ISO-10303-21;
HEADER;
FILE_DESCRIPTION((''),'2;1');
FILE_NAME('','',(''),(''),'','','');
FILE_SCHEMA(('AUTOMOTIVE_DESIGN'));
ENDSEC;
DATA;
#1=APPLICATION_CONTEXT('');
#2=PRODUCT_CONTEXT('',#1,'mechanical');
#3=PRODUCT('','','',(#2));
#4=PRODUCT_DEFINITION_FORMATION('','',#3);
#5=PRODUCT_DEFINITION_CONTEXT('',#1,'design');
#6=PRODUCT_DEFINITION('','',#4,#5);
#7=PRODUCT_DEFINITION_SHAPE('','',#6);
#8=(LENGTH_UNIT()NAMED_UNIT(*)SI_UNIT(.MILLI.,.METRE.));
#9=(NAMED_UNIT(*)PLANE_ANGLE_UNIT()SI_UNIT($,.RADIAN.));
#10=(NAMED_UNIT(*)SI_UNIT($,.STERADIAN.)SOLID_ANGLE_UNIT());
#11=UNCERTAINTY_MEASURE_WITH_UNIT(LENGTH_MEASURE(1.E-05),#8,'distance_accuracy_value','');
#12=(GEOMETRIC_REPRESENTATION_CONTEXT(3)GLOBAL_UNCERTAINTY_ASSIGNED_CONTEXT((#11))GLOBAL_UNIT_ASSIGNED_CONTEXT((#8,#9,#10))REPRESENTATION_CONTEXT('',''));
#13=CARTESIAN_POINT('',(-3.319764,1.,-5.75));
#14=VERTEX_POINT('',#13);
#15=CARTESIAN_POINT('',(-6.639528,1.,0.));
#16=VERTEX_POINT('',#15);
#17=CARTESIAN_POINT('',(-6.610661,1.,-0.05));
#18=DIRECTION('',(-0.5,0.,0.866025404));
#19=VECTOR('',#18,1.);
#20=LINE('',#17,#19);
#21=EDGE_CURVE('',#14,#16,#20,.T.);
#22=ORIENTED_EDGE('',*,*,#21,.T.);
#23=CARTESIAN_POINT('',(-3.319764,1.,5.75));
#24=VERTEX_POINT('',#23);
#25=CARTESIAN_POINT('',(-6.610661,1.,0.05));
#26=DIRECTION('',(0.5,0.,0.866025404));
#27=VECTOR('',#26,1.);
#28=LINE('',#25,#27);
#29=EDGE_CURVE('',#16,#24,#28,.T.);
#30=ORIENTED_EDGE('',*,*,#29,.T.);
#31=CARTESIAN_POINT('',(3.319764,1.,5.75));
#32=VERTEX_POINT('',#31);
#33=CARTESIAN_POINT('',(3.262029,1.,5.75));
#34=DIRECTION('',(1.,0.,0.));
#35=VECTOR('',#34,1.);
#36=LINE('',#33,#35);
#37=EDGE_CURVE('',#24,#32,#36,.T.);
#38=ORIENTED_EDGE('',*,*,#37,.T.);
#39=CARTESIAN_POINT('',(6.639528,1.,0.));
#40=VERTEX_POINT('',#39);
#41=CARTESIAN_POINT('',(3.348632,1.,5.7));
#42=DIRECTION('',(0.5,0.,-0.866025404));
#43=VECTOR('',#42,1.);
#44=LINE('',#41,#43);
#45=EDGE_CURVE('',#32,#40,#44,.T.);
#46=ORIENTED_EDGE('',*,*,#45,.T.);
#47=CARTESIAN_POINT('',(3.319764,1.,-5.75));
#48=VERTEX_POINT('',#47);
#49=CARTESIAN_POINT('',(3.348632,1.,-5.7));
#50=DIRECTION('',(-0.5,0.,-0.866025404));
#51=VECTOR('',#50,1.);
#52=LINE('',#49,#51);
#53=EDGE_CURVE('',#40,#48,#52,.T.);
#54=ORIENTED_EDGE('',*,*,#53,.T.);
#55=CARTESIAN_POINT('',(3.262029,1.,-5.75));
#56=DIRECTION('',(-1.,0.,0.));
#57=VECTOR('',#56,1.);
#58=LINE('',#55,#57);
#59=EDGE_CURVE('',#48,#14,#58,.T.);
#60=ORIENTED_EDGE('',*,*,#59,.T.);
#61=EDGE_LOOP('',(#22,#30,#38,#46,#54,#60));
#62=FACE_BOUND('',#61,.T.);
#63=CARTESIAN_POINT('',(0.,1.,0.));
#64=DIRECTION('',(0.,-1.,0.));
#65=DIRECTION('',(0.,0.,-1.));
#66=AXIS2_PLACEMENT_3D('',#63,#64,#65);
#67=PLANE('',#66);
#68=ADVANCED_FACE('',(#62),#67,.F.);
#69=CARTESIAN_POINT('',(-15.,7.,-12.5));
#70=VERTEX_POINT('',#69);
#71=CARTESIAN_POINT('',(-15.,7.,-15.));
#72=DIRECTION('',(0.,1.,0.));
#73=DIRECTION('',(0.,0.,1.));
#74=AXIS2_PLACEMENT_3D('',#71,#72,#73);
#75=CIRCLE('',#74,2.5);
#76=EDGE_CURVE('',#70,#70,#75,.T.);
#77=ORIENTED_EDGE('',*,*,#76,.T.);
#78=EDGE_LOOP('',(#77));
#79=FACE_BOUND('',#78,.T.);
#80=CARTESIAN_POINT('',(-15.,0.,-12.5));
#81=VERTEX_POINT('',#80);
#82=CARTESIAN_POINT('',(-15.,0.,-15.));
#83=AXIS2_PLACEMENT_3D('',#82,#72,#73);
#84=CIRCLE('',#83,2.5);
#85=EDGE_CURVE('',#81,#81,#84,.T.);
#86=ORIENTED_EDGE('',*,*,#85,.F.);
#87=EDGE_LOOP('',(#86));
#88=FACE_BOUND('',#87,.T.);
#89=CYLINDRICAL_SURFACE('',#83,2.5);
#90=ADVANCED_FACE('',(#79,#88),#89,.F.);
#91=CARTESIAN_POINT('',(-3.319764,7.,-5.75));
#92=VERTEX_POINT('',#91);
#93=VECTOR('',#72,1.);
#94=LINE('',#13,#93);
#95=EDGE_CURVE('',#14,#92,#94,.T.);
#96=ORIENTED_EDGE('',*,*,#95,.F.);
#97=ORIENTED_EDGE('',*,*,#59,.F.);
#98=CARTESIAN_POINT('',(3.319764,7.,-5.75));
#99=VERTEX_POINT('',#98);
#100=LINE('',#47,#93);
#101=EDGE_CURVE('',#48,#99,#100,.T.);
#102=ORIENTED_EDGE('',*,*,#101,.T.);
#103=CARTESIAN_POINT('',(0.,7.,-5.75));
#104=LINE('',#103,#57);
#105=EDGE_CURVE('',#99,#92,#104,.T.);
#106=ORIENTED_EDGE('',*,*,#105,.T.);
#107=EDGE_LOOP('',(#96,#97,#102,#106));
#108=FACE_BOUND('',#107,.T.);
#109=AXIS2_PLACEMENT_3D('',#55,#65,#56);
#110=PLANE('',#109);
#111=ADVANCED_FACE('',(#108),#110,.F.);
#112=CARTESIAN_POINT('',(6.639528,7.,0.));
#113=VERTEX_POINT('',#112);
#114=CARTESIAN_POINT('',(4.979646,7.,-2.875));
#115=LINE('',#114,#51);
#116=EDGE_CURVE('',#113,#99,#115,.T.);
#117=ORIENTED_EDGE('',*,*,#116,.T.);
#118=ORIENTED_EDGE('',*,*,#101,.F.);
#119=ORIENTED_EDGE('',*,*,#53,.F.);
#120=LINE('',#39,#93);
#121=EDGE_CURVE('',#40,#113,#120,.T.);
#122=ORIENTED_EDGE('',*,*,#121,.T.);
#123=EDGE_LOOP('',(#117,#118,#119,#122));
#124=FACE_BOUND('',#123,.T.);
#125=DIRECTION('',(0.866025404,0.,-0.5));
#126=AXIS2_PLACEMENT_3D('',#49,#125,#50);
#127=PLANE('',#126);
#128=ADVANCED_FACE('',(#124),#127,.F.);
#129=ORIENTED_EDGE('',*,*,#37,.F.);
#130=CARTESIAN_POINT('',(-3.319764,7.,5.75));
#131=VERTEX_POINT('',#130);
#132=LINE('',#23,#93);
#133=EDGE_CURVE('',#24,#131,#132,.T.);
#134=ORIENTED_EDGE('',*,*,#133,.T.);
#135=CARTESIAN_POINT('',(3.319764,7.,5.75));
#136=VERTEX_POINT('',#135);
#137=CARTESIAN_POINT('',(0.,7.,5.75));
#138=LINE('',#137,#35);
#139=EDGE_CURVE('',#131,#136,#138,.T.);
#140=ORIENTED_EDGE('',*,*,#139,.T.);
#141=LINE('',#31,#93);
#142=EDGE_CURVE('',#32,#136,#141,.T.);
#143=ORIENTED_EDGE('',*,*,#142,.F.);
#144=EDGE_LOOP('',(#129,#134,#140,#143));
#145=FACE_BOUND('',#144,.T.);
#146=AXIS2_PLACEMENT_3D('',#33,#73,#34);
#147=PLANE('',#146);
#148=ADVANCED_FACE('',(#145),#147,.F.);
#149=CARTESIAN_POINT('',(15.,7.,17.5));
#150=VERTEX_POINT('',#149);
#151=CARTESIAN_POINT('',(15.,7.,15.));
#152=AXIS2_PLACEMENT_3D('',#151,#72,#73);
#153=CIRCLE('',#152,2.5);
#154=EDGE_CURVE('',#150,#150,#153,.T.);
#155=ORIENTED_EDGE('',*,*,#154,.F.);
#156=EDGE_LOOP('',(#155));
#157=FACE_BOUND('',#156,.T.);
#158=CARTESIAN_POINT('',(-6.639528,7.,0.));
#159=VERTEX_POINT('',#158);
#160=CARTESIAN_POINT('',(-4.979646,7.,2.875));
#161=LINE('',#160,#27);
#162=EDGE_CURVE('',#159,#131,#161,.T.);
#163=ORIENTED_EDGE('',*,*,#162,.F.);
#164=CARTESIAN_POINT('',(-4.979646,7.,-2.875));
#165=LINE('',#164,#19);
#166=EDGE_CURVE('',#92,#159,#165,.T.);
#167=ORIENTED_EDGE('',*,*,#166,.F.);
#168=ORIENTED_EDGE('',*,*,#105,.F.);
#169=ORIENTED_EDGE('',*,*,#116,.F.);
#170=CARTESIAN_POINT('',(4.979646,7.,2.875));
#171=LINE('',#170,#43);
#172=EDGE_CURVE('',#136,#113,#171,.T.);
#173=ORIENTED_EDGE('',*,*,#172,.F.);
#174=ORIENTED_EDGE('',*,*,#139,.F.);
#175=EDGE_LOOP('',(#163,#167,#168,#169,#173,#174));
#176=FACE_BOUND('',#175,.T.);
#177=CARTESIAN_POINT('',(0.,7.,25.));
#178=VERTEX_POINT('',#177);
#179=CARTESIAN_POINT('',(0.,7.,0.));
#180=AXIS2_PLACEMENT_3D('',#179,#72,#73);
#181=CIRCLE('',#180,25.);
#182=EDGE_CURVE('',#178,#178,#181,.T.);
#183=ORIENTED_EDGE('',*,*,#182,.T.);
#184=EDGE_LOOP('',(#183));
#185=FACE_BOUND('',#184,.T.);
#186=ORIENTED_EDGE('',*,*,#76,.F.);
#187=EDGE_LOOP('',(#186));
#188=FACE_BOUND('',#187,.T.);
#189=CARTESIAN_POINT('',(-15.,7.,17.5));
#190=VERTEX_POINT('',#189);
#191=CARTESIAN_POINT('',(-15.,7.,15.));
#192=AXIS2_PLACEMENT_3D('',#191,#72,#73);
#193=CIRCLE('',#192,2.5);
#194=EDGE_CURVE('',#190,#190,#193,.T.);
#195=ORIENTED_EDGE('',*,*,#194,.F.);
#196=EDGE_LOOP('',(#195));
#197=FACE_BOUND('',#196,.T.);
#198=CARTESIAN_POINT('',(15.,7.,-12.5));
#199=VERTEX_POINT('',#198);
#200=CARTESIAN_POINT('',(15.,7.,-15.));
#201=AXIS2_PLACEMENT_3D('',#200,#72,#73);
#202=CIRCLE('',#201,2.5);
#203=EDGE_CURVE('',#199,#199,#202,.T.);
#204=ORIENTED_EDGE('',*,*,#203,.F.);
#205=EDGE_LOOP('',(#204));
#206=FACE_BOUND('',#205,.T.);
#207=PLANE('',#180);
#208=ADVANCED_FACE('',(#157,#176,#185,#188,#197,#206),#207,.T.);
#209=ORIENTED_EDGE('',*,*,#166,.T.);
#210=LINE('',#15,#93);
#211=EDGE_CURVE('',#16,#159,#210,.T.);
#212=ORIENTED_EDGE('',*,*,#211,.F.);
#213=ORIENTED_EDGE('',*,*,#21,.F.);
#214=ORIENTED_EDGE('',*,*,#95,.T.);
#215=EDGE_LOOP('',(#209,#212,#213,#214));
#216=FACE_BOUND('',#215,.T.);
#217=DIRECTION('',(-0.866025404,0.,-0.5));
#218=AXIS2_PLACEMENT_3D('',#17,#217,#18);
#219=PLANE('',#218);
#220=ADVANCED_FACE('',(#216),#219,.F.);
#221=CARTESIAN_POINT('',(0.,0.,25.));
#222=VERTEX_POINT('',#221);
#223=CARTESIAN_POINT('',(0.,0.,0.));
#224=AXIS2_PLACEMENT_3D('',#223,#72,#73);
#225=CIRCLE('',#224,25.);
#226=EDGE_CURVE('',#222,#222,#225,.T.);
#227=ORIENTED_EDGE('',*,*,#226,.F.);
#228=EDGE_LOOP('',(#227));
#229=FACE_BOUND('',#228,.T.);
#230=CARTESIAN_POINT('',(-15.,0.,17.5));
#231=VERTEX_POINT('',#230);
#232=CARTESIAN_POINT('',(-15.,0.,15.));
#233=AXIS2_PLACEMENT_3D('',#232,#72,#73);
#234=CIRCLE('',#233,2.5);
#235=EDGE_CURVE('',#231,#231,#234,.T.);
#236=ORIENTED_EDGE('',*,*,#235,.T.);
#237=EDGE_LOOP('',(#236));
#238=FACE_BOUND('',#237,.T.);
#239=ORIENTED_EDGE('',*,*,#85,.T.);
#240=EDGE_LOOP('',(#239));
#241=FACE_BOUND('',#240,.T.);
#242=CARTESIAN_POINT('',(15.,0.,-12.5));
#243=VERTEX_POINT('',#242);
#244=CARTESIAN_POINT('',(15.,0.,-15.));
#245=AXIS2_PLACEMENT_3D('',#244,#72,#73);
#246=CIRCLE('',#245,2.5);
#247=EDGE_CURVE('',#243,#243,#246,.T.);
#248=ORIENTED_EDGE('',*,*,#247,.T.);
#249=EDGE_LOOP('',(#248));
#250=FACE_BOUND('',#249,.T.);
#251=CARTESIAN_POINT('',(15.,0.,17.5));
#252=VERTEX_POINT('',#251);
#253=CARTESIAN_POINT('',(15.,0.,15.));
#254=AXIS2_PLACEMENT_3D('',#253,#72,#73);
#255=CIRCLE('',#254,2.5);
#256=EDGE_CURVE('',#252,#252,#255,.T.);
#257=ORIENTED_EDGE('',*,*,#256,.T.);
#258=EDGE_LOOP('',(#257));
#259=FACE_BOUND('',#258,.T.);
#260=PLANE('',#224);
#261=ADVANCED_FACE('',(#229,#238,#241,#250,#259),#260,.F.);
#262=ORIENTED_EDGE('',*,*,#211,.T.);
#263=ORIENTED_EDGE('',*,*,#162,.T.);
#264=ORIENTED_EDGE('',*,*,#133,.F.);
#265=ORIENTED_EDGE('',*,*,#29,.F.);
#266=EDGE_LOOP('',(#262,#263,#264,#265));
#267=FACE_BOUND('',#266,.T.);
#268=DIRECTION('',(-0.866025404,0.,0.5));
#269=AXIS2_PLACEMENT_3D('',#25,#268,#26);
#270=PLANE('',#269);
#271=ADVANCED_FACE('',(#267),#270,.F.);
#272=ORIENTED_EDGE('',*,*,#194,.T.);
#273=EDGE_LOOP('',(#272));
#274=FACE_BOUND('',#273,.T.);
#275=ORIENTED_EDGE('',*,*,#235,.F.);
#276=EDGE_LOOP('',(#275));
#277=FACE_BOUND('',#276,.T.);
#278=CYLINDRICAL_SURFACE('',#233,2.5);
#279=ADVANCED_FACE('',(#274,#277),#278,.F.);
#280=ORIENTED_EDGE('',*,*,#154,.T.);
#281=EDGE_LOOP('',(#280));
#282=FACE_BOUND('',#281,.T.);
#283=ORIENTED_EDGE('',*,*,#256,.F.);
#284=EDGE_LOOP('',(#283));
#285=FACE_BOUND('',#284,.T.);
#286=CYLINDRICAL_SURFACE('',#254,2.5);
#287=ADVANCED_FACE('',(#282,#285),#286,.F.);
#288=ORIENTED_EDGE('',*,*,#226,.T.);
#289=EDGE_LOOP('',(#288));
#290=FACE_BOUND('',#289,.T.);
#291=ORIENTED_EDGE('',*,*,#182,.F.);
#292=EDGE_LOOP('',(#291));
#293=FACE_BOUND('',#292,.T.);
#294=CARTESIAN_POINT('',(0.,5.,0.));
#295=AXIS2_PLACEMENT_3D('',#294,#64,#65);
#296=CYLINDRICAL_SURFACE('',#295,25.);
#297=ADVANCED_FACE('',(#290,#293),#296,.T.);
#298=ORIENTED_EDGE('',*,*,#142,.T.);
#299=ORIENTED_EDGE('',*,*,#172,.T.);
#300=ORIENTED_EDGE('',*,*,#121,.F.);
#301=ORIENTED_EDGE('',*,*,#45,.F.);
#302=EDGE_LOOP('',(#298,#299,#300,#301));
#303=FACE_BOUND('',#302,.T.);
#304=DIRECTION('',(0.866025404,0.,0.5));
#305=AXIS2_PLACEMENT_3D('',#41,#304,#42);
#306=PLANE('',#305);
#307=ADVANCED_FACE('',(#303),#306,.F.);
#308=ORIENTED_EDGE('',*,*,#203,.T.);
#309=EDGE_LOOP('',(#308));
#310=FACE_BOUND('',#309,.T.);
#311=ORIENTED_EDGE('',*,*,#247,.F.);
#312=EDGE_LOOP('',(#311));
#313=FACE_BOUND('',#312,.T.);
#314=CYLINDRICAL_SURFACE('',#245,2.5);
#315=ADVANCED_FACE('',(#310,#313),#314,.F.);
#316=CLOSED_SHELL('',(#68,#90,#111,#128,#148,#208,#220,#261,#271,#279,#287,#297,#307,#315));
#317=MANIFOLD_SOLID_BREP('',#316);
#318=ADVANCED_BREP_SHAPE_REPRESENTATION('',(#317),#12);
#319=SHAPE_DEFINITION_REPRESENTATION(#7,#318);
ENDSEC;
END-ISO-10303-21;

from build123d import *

# Parameters (mm, degrees)
SKETCH1_R           = 25
BOSS_EXTRUDE1_DEPTH = 5
SKETCH2_R           = 2.5
CUT_EXTRUDE1_DEPTH  = 36.707142143
CUT_EXTRUDE2_DEPTH  = 4
MOVE_FACE1_BY       = 2
MOVE_START          = 1
MOVE_FACE2_DEPTH    = 6


# Read off the part's stored shape, not the designer's step: Move Face2
with BuildPart() as part:
    # Sketch1 → Boss-Extrude1 (new body)
    with BuildSketch(Plane(origin=(0, 0, 0), x_dir=(1, 0, 0), z_dir=(0, 1, 0))):
        with Locations(Location((0, 0, 0), (0, 0, 270))):
            Circle(SKETCH1_R)
    extrude(amount=BOSS_EXTRUDE1_DEPTH)

    # Sketch2 → Cut-Extrude1 (cut, through all)
    with BuildSketch(Plane(origin=(0, 5, 0), x_dir=(1, 0, 0), z_dir=(0, 1, 0))):
        with Locations(Location((-15, 15, 0), (0, 0, 270))):
            Circle(SKETCH2_R)
        with Locations(Location((15, 15, 0), (0, 0, 270))):
            Circle(SKETCH2_R)
        with Locations(Location((15, -15, 0), (0, 0, 270))):
            Circle(SKETCH2_R)
        with Locations(Location((-15, -15, 0), (0, 0, 270))):
            Circle(SKETCH2_R)
    extrude(amount=-CUT_EXTRUDE1_DEPTH, mode=Mode.SUBTRACT)

    # Sketch7 → Cut-Extrude2 (cut)
    with BuildSketch(Plane(origin=(0, 5, 0), x_dir=(1, 0, 0), z_dir=(0, 1, 0))):
        Polygon((3.262029021, -5.65), (-3.262029021, -5.65), (-6.524058042, 0), (-3.262029021, 5.65), (3.262029021, 5.65), (6.524058042, 0), align=None)
    extrude(amount=-CUT_EXTRUDE2_DEPTH, mode=Mode.SUBTRACT)

    # Move Face1: a face moved outward by 2.0
    extrude(part.faces().sort_by_distance((0, 5, 12.5))[0], amount=MOVE_FACE1_BY, dir=(0, 1, 0))

    # Move Face2 outline → Move Face2 (cut)
    with BuildSketch(Plane(origin=(0, 0, 0), x_dir=(1, 0, 0), z_dir=(0, 1, 0)).offset(MOVE_START)):
        Polygon((-3.319764048, 5.75), (-6.639528096, 0), (-3.319764048, -5.75), (3.319764048, -5.75), (6.639528096, 0), (3.319764048, 5.75), align=None)
        Polygon((-3.262029021, -5.65), (-6.524058042, 0), (-3.262029021, 5.65), (3.262029021, 5.65), (6.524058042, 0), (3.262029021, -5.65), align=None, mode=Mode.SUBTRACT)
    extrude(amount=MOVE_FACE2_DEPTH, mode=Mode.SUBTRACT)


solid = part.part
